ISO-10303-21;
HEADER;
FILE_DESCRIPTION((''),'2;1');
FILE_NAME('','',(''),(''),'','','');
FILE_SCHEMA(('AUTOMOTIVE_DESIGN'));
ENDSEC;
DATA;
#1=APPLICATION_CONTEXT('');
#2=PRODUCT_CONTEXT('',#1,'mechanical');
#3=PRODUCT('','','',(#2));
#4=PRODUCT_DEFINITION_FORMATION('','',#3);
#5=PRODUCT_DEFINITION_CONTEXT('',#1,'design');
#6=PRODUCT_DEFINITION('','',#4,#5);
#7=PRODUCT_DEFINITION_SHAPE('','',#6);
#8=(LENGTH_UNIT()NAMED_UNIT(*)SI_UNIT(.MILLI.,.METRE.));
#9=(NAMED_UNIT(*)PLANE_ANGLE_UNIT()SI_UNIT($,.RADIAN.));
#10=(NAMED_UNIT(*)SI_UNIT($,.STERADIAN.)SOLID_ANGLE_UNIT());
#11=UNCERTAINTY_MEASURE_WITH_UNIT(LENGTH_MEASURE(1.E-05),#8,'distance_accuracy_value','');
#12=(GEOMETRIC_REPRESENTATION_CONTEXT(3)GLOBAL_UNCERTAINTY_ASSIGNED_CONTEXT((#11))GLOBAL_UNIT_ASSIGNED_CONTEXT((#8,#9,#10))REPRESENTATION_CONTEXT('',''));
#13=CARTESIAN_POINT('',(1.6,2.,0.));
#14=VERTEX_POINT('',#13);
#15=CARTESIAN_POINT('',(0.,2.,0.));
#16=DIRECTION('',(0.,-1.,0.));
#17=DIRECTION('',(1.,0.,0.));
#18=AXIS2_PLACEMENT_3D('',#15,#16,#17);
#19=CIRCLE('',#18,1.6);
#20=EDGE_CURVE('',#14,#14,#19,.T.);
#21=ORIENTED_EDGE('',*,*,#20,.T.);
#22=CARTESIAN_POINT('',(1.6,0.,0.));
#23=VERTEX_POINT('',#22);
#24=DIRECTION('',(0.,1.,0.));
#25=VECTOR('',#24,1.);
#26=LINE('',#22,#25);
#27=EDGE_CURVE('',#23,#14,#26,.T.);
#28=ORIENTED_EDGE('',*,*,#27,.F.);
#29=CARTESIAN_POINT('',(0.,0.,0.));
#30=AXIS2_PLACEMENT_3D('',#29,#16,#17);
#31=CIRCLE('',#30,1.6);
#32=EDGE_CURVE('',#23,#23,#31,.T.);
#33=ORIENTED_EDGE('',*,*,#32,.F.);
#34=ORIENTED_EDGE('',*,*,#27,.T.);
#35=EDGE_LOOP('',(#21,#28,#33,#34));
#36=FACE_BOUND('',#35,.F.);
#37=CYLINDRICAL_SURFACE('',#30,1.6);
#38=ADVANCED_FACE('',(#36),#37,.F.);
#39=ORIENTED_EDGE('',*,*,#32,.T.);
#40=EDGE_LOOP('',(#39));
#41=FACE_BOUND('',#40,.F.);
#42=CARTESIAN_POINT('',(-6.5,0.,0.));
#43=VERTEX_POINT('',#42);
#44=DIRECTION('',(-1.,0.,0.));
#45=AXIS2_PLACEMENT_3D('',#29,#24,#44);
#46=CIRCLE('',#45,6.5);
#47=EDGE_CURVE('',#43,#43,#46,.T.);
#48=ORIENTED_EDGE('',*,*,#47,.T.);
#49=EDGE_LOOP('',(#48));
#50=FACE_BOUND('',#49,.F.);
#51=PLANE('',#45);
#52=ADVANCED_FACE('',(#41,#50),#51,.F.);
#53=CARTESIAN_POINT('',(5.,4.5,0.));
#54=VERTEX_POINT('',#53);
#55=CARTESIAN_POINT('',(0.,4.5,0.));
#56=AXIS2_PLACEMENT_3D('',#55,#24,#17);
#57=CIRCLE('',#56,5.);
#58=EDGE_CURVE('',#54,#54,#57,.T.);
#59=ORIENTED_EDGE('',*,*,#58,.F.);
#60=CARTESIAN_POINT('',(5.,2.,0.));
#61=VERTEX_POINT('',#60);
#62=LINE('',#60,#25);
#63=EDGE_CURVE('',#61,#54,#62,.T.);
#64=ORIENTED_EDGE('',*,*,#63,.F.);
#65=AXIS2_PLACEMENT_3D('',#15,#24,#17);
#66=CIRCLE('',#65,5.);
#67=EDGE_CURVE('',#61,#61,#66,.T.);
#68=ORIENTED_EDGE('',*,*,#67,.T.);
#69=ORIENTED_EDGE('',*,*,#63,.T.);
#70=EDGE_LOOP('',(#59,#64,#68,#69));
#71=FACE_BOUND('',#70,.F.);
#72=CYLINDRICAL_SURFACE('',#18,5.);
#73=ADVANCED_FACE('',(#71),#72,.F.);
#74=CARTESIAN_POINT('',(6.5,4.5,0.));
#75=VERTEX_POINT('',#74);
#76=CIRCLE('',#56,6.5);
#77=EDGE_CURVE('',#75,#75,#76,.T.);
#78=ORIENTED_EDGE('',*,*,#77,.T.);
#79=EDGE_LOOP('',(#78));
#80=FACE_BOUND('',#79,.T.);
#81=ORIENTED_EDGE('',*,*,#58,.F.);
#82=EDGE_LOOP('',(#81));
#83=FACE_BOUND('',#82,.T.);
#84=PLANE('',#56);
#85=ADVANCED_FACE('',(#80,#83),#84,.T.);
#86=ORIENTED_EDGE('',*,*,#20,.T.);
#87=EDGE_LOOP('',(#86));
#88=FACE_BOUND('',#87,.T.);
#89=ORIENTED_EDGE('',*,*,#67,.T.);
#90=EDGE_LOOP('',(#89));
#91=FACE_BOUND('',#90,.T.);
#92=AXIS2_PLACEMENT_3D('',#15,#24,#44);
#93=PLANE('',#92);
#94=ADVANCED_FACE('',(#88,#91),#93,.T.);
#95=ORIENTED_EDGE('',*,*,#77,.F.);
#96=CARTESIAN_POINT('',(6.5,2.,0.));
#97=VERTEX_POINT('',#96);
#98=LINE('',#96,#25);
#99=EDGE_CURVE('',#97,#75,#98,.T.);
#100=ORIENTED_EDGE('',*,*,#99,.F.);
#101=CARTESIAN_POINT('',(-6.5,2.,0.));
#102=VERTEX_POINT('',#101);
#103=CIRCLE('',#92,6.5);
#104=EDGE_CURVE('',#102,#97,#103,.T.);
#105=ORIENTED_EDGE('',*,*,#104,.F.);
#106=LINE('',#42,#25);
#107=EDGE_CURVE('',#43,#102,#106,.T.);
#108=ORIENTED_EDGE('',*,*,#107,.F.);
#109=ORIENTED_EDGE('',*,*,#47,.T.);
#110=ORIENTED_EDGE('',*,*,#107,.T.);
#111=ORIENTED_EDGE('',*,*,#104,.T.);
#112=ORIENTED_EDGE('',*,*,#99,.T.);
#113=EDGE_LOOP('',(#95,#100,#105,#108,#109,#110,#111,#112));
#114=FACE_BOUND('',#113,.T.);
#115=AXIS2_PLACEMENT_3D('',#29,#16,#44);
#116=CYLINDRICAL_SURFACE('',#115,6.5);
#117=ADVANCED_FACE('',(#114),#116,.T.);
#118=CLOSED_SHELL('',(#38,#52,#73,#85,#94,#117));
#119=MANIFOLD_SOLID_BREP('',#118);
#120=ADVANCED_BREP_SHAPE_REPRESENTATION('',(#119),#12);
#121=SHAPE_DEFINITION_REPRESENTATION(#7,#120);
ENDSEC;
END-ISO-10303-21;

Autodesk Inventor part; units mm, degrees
ref_plane "YZ Plane" through (0, 0, 0) normal (1, 0, 0) x (0, 1, 0)
ref_plane "XZ Plane" through (0, 0, 0) normal (0, 1, 0) x (-1, 0, 0)
ref_plane "XY Plane" through (0, 0, 0) normal (0, 0, 1) x (1, 0, 0)
sketch "Skizze1" plane through (0, 0, 0) normal (0, 1, 0) x (-1, 0, 0)
  circle A0 centre (0, 0) radius 6.5
  dimension "d0" = 13
extrude "Extrusion1" add sketch "Skizze1" along normal blind 2
sketch "Skizze2" plane through (0, 2, 0) normal (0, 1, 0) x (1, 0, 0)
  circle A0 centre (0, 0) radius 5
  circle A1 centre (0, 0) radius 6.5
  dimension "d3" = 10
  dimension "d4" = 13
extrude "Extrusion2" add sketch "Skizze2" along normal blind 2.5
sketch "Skizze3" plane through (0, 0, 0) normal (0, -1, 0) x (1, 0, 0)
  circle A0 centre (0, 0) radius 1.6
  dimension "d7" = 3.2
extrude "Extrusion3" cut sketch "Skizze3" against normal up to surface (2 mm away)
properties part number "Gegenstück_Welle_Diff"
